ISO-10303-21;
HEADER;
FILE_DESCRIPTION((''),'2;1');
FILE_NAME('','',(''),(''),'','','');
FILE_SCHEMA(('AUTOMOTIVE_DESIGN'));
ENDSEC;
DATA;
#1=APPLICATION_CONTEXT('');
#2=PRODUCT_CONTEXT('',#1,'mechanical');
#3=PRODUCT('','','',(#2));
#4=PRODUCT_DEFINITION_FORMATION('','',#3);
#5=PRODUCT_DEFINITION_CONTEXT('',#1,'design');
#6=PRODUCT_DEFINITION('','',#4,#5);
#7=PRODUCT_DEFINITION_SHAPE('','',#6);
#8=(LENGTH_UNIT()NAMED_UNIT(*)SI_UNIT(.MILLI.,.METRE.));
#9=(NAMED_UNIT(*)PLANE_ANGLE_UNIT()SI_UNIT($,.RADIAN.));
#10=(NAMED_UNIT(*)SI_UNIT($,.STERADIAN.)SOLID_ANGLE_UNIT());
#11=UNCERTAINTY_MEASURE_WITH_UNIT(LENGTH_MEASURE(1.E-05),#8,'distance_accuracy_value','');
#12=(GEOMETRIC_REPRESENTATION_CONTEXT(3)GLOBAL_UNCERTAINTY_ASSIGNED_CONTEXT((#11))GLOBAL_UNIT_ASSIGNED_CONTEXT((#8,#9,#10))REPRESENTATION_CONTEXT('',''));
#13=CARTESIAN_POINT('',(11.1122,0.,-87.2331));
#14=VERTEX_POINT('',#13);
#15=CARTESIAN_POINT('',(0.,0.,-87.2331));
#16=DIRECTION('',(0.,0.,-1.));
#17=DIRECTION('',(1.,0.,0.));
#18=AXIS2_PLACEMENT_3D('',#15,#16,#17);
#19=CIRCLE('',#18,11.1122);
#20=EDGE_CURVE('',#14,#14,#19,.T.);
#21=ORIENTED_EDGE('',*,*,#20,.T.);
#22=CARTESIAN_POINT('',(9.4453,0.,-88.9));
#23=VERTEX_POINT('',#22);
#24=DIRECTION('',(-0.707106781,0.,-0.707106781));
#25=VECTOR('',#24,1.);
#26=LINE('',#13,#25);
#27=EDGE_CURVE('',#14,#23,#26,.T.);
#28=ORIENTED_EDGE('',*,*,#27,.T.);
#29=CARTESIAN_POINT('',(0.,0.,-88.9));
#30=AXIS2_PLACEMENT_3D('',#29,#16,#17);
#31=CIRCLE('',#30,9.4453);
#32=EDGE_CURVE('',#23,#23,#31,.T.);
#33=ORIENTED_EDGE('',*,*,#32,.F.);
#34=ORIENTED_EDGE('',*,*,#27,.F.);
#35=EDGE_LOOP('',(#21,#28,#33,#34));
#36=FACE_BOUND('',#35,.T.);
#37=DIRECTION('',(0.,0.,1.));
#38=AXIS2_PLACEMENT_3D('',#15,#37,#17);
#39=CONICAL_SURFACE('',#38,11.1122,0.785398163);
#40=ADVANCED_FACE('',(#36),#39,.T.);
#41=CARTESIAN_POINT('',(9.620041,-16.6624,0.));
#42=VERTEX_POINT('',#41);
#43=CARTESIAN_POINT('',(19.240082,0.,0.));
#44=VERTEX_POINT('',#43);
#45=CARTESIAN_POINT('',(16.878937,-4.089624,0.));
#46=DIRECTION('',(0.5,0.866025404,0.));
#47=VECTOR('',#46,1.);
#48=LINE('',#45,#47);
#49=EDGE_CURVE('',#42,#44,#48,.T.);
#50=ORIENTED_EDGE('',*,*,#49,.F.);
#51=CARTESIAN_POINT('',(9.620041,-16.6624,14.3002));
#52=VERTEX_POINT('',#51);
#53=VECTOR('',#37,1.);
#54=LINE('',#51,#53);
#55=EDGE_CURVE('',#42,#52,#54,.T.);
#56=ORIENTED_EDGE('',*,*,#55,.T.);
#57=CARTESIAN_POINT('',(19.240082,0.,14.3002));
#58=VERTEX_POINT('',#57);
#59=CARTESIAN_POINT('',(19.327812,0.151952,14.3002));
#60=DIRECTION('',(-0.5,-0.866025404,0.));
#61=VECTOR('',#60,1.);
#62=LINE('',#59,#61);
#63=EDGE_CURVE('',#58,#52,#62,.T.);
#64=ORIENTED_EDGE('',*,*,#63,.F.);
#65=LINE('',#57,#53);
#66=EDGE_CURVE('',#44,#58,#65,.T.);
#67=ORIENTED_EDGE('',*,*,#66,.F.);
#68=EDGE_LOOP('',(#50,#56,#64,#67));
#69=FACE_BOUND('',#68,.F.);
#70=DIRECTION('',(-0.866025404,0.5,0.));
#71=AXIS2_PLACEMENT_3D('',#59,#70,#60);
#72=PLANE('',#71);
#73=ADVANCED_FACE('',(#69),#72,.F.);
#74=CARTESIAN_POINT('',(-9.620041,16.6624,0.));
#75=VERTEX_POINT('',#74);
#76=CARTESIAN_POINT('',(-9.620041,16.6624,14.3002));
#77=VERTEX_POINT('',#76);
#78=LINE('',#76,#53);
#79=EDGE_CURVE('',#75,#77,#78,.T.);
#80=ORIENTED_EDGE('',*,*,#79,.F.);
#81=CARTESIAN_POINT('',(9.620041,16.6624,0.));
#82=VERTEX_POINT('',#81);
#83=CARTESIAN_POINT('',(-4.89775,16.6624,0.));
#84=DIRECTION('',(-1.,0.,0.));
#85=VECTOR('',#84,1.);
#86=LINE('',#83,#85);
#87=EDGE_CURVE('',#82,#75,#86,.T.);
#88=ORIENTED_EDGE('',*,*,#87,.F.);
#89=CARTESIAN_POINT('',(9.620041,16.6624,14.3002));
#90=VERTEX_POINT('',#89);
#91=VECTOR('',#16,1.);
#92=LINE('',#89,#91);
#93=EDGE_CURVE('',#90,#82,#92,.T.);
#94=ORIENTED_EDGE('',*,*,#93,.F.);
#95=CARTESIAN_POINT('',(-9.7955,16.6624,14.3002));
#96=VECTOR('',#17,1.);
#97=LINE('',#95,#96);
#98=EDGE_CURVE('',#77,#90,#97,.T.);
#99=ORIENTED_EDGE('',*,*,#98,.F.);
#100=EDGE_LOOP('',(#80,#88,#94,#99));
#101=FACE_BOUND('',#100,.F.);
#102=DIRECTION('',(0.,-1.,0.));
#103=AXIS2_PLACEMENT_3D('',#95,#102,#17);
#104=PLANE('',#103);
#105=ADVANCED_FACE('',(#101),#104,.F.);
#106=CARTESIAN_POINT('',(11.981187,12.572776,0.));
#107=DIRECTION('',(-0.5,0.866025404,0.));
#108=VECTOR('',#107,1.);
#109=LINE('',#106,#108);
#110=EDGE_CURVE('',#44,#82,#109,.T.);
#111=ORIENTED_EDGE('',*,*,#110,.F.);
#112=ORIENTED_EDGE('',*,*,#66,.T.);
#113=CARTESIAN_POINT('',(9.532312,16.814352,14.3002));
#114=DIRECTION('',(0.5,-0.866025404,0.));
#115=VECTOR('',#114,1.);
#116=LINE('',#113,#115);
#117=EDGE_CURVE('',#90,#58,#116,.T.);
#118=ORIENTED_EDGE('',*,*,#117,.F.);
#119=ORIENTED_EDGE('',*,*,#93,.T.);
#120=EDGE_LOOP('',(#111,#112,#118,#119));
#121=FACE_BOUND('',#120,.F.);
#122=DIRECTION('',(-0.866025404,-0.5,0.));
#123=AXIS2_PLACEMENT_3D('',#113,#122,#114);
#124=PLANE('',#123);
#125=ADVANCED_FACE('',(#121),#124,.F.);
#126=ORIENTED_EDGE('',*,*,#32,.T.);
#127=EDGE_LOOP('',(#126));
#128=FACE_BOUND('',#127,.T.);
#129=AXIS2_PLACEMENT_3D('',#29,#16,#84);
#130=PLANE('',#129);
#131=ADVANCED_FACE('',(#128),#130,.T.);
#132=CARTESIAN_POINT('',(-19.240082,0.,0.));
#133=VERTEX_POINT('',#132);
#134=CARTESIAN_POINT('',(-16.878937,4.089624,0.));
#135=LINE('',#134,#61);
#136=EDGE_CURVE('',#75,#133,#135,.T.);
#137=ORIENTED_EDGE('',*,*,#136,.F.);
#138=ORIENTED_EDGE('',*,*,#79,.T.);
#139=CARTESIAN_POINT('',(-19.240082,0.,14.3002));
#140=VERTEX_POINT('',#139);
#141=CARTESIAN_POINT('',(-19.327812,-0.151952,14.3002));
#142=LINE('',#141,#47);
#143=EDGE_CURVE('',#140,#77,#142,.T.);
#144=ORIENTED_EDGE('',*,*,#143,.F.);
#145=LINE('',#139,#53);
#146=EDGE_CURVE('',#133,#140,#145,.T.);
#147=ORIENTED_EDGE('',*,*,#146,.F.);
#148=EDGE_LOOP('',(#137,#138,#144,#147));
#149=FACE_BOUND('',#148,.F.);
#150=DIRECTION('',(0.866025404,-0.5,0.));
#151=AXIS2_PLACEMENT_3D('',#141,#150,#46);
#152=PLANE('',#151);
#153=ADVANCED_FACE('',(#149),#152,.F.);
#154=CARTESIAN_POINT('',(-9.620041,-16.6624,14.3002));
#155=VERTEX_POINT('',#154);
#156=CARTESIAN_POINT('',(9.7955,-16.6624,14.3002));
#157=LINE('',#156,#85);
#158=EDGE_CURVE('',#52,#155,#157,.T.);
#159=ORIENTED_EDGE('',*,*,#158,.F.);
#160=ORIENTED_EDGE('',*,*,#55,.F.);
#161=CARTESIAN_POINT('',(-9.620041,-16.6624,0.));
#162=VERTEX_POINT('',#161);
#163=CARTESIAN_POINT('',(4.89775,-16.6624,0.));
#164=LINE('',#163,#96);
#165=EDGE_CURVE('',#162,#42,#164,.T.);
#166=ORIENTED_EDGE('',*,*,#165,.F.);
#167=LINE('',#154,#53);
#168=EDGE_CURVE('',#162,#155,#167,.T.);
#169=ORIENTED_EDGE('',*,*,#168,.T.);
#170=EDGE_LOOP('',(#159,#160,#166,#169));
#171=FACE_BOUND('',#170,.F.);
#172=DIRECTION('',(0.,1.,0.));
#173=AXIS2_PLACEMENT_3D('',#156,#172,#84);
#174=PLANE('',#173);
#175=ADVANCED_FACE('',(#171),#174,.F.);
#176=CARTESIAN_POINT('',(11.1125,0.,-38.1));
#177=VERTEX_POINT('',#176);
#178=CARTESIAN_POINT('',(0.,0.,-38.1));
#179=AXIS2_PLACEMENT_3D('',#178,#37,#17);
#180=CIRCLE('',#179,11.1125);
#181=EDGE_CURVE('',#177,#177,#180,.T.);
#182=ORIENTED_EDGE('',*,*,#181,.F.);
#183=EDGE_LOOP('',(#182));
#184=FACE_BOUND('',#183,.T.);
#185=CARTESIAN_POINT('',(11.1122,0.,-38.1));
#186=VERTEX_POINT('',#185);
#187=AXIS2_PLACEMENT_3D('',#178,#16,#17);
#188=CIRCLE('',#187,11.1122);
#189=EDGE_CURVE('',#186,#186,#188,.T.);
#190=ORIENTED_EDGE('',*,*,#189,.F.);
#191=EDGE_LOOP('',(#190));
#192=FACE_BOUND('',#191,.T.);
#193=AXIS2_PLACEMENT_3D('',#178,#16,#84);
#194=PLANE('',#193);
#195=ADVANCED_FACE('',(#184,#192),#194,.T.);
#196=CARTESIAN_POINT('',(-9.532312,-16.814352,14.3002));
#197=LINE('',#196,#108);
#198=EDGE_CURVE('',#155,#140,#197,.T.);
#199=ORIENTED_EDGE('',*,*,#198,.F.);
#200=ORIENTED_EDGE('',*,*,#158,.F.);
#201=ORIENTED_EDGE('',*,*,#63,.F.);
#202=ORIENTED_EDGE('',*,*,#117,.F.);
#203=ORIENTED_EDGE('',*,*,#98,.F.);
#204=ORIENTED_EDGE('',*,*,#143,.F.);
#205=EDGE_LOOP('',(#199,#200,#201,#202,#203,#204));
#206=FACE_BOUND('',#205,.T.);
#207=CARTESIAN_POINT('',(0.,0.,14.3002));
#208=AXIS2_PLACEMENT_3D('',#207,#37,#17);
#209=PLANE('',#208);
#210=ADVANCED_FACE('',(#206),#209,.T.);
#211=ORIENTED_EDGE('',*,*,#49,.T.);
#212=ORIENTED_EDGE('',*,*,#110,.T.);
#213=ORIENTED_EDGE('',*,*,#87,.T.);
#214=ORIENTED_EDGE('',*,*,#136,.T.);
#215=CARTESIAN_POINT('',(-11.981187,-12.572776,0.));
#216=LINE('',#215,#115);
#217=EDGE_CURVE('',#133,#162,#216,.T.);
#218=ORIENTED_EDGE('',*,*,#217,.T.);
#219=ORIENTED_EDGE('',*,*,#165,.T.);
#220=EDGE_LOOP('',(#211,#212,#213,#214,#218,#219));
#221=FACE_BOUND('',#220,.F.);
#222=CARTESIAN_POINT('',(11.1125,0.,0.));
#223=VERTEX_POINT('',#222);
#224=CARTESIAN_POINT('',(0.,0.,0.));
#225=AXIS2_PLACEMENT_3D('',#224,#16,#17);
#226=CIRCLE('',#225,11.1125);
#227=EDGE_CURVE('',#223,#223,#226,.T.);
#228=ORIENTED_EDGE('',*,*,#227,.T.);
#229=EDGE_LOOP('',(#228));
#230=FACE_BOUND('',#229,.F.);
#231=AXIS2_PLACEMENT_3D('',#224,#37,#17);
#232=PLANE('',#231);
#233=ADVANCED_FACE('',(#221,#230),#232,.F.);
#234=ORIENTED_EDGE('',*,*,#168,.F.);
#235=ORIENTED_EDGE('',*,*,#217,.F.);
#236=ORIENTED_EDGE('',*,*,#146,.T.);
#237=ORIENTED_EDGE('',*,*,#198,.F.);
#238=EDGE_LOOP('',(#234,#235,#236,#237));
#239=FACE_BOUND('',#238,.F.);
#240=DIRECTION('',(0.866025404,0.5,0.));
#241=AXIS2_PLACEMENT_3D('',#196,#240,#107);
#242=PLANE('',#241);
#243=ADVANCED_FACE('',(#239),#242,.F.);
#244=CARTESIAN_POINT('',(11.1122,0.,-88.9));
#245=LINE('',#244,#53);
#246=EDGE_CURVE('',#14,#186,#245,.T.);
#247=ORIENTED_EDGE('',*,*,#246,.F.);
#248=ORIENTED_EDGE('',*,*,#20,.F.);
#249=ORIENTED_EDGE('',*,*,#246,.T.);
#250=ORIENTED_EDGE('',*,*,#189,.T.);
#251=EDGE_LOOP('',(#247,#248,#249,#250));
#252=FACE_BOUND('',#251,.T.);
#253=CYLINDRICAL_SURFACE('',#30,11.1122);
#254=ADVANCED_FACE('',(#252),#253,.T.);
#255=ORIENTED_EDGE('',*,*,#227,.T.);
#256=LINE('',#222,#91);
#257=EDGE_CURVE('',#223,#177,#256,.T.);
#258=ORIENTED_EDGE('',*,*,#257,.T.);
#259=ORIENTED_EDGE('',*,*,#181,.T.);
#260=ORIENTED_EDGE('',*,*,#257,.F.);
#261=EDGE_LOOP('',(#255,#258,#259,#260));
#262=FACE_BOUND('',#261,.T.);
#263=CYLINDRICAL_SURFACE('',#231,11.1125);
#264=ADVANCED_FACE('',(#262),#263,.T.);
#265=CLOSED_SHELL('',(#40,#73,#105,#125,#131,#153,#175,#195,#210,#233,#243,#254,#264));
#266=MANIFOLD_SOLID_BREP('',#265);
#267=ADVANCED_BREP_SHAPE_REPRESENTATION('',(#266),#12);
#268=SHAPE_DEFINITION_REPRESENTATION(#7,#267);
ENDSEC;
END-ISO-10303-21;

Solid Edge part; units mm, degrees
sketch "Sketch1" plane through (0, 0, 0) normal (0, 0, 1) x (1, 0, 0)
  circle A0 centre (0, 0) radius 19.3284
  dimension "D1" = 38.6568
extrude "Protrusion1" add sketch "Sketch1" along normal blind 14.3002
sketch "Sketch2" plane through (0, 0, 0) normal (0, 0, -1) x (1, 0, 0)
  circle A0 centre (0, 0) radius 11.1125
extrude "Protrusion2" add sketch "Sketch2" along normal blind 88.9
sketch "Sketch3" plane through (0, 0, -88.9) normal (0, 0, -1) x (1, 0, 0)
  circle A0 centre (0, 0) radius 11.1122
extrude "Cutout1" cut sketch "Sketch3" against normal blind 50.8 flip side to cut
chamfer "Chamfer_1" distance 1.6669 angle 45 1 edges at (-11.1122, 0, -88.9)
sketch "Sketch4" plane through (0, 0, 14.3002) normal (0, 0, 1) x (1, 0, 0)
  line L0 (-9.7955, 16.6624) -> (9.7955, 16.6624)
  dimension "D1" = 33.3248
extrude "Cutout2" cut sketch "Sketch4" against normal up to next material side at (0, 16.7124, 14.3002)
pattern_circular "Pattern1" count 6 over 360 about axis through (0, 0, 14.3002) along (0, 0, 1) of "Cutout2"
properties part number "24105204"
